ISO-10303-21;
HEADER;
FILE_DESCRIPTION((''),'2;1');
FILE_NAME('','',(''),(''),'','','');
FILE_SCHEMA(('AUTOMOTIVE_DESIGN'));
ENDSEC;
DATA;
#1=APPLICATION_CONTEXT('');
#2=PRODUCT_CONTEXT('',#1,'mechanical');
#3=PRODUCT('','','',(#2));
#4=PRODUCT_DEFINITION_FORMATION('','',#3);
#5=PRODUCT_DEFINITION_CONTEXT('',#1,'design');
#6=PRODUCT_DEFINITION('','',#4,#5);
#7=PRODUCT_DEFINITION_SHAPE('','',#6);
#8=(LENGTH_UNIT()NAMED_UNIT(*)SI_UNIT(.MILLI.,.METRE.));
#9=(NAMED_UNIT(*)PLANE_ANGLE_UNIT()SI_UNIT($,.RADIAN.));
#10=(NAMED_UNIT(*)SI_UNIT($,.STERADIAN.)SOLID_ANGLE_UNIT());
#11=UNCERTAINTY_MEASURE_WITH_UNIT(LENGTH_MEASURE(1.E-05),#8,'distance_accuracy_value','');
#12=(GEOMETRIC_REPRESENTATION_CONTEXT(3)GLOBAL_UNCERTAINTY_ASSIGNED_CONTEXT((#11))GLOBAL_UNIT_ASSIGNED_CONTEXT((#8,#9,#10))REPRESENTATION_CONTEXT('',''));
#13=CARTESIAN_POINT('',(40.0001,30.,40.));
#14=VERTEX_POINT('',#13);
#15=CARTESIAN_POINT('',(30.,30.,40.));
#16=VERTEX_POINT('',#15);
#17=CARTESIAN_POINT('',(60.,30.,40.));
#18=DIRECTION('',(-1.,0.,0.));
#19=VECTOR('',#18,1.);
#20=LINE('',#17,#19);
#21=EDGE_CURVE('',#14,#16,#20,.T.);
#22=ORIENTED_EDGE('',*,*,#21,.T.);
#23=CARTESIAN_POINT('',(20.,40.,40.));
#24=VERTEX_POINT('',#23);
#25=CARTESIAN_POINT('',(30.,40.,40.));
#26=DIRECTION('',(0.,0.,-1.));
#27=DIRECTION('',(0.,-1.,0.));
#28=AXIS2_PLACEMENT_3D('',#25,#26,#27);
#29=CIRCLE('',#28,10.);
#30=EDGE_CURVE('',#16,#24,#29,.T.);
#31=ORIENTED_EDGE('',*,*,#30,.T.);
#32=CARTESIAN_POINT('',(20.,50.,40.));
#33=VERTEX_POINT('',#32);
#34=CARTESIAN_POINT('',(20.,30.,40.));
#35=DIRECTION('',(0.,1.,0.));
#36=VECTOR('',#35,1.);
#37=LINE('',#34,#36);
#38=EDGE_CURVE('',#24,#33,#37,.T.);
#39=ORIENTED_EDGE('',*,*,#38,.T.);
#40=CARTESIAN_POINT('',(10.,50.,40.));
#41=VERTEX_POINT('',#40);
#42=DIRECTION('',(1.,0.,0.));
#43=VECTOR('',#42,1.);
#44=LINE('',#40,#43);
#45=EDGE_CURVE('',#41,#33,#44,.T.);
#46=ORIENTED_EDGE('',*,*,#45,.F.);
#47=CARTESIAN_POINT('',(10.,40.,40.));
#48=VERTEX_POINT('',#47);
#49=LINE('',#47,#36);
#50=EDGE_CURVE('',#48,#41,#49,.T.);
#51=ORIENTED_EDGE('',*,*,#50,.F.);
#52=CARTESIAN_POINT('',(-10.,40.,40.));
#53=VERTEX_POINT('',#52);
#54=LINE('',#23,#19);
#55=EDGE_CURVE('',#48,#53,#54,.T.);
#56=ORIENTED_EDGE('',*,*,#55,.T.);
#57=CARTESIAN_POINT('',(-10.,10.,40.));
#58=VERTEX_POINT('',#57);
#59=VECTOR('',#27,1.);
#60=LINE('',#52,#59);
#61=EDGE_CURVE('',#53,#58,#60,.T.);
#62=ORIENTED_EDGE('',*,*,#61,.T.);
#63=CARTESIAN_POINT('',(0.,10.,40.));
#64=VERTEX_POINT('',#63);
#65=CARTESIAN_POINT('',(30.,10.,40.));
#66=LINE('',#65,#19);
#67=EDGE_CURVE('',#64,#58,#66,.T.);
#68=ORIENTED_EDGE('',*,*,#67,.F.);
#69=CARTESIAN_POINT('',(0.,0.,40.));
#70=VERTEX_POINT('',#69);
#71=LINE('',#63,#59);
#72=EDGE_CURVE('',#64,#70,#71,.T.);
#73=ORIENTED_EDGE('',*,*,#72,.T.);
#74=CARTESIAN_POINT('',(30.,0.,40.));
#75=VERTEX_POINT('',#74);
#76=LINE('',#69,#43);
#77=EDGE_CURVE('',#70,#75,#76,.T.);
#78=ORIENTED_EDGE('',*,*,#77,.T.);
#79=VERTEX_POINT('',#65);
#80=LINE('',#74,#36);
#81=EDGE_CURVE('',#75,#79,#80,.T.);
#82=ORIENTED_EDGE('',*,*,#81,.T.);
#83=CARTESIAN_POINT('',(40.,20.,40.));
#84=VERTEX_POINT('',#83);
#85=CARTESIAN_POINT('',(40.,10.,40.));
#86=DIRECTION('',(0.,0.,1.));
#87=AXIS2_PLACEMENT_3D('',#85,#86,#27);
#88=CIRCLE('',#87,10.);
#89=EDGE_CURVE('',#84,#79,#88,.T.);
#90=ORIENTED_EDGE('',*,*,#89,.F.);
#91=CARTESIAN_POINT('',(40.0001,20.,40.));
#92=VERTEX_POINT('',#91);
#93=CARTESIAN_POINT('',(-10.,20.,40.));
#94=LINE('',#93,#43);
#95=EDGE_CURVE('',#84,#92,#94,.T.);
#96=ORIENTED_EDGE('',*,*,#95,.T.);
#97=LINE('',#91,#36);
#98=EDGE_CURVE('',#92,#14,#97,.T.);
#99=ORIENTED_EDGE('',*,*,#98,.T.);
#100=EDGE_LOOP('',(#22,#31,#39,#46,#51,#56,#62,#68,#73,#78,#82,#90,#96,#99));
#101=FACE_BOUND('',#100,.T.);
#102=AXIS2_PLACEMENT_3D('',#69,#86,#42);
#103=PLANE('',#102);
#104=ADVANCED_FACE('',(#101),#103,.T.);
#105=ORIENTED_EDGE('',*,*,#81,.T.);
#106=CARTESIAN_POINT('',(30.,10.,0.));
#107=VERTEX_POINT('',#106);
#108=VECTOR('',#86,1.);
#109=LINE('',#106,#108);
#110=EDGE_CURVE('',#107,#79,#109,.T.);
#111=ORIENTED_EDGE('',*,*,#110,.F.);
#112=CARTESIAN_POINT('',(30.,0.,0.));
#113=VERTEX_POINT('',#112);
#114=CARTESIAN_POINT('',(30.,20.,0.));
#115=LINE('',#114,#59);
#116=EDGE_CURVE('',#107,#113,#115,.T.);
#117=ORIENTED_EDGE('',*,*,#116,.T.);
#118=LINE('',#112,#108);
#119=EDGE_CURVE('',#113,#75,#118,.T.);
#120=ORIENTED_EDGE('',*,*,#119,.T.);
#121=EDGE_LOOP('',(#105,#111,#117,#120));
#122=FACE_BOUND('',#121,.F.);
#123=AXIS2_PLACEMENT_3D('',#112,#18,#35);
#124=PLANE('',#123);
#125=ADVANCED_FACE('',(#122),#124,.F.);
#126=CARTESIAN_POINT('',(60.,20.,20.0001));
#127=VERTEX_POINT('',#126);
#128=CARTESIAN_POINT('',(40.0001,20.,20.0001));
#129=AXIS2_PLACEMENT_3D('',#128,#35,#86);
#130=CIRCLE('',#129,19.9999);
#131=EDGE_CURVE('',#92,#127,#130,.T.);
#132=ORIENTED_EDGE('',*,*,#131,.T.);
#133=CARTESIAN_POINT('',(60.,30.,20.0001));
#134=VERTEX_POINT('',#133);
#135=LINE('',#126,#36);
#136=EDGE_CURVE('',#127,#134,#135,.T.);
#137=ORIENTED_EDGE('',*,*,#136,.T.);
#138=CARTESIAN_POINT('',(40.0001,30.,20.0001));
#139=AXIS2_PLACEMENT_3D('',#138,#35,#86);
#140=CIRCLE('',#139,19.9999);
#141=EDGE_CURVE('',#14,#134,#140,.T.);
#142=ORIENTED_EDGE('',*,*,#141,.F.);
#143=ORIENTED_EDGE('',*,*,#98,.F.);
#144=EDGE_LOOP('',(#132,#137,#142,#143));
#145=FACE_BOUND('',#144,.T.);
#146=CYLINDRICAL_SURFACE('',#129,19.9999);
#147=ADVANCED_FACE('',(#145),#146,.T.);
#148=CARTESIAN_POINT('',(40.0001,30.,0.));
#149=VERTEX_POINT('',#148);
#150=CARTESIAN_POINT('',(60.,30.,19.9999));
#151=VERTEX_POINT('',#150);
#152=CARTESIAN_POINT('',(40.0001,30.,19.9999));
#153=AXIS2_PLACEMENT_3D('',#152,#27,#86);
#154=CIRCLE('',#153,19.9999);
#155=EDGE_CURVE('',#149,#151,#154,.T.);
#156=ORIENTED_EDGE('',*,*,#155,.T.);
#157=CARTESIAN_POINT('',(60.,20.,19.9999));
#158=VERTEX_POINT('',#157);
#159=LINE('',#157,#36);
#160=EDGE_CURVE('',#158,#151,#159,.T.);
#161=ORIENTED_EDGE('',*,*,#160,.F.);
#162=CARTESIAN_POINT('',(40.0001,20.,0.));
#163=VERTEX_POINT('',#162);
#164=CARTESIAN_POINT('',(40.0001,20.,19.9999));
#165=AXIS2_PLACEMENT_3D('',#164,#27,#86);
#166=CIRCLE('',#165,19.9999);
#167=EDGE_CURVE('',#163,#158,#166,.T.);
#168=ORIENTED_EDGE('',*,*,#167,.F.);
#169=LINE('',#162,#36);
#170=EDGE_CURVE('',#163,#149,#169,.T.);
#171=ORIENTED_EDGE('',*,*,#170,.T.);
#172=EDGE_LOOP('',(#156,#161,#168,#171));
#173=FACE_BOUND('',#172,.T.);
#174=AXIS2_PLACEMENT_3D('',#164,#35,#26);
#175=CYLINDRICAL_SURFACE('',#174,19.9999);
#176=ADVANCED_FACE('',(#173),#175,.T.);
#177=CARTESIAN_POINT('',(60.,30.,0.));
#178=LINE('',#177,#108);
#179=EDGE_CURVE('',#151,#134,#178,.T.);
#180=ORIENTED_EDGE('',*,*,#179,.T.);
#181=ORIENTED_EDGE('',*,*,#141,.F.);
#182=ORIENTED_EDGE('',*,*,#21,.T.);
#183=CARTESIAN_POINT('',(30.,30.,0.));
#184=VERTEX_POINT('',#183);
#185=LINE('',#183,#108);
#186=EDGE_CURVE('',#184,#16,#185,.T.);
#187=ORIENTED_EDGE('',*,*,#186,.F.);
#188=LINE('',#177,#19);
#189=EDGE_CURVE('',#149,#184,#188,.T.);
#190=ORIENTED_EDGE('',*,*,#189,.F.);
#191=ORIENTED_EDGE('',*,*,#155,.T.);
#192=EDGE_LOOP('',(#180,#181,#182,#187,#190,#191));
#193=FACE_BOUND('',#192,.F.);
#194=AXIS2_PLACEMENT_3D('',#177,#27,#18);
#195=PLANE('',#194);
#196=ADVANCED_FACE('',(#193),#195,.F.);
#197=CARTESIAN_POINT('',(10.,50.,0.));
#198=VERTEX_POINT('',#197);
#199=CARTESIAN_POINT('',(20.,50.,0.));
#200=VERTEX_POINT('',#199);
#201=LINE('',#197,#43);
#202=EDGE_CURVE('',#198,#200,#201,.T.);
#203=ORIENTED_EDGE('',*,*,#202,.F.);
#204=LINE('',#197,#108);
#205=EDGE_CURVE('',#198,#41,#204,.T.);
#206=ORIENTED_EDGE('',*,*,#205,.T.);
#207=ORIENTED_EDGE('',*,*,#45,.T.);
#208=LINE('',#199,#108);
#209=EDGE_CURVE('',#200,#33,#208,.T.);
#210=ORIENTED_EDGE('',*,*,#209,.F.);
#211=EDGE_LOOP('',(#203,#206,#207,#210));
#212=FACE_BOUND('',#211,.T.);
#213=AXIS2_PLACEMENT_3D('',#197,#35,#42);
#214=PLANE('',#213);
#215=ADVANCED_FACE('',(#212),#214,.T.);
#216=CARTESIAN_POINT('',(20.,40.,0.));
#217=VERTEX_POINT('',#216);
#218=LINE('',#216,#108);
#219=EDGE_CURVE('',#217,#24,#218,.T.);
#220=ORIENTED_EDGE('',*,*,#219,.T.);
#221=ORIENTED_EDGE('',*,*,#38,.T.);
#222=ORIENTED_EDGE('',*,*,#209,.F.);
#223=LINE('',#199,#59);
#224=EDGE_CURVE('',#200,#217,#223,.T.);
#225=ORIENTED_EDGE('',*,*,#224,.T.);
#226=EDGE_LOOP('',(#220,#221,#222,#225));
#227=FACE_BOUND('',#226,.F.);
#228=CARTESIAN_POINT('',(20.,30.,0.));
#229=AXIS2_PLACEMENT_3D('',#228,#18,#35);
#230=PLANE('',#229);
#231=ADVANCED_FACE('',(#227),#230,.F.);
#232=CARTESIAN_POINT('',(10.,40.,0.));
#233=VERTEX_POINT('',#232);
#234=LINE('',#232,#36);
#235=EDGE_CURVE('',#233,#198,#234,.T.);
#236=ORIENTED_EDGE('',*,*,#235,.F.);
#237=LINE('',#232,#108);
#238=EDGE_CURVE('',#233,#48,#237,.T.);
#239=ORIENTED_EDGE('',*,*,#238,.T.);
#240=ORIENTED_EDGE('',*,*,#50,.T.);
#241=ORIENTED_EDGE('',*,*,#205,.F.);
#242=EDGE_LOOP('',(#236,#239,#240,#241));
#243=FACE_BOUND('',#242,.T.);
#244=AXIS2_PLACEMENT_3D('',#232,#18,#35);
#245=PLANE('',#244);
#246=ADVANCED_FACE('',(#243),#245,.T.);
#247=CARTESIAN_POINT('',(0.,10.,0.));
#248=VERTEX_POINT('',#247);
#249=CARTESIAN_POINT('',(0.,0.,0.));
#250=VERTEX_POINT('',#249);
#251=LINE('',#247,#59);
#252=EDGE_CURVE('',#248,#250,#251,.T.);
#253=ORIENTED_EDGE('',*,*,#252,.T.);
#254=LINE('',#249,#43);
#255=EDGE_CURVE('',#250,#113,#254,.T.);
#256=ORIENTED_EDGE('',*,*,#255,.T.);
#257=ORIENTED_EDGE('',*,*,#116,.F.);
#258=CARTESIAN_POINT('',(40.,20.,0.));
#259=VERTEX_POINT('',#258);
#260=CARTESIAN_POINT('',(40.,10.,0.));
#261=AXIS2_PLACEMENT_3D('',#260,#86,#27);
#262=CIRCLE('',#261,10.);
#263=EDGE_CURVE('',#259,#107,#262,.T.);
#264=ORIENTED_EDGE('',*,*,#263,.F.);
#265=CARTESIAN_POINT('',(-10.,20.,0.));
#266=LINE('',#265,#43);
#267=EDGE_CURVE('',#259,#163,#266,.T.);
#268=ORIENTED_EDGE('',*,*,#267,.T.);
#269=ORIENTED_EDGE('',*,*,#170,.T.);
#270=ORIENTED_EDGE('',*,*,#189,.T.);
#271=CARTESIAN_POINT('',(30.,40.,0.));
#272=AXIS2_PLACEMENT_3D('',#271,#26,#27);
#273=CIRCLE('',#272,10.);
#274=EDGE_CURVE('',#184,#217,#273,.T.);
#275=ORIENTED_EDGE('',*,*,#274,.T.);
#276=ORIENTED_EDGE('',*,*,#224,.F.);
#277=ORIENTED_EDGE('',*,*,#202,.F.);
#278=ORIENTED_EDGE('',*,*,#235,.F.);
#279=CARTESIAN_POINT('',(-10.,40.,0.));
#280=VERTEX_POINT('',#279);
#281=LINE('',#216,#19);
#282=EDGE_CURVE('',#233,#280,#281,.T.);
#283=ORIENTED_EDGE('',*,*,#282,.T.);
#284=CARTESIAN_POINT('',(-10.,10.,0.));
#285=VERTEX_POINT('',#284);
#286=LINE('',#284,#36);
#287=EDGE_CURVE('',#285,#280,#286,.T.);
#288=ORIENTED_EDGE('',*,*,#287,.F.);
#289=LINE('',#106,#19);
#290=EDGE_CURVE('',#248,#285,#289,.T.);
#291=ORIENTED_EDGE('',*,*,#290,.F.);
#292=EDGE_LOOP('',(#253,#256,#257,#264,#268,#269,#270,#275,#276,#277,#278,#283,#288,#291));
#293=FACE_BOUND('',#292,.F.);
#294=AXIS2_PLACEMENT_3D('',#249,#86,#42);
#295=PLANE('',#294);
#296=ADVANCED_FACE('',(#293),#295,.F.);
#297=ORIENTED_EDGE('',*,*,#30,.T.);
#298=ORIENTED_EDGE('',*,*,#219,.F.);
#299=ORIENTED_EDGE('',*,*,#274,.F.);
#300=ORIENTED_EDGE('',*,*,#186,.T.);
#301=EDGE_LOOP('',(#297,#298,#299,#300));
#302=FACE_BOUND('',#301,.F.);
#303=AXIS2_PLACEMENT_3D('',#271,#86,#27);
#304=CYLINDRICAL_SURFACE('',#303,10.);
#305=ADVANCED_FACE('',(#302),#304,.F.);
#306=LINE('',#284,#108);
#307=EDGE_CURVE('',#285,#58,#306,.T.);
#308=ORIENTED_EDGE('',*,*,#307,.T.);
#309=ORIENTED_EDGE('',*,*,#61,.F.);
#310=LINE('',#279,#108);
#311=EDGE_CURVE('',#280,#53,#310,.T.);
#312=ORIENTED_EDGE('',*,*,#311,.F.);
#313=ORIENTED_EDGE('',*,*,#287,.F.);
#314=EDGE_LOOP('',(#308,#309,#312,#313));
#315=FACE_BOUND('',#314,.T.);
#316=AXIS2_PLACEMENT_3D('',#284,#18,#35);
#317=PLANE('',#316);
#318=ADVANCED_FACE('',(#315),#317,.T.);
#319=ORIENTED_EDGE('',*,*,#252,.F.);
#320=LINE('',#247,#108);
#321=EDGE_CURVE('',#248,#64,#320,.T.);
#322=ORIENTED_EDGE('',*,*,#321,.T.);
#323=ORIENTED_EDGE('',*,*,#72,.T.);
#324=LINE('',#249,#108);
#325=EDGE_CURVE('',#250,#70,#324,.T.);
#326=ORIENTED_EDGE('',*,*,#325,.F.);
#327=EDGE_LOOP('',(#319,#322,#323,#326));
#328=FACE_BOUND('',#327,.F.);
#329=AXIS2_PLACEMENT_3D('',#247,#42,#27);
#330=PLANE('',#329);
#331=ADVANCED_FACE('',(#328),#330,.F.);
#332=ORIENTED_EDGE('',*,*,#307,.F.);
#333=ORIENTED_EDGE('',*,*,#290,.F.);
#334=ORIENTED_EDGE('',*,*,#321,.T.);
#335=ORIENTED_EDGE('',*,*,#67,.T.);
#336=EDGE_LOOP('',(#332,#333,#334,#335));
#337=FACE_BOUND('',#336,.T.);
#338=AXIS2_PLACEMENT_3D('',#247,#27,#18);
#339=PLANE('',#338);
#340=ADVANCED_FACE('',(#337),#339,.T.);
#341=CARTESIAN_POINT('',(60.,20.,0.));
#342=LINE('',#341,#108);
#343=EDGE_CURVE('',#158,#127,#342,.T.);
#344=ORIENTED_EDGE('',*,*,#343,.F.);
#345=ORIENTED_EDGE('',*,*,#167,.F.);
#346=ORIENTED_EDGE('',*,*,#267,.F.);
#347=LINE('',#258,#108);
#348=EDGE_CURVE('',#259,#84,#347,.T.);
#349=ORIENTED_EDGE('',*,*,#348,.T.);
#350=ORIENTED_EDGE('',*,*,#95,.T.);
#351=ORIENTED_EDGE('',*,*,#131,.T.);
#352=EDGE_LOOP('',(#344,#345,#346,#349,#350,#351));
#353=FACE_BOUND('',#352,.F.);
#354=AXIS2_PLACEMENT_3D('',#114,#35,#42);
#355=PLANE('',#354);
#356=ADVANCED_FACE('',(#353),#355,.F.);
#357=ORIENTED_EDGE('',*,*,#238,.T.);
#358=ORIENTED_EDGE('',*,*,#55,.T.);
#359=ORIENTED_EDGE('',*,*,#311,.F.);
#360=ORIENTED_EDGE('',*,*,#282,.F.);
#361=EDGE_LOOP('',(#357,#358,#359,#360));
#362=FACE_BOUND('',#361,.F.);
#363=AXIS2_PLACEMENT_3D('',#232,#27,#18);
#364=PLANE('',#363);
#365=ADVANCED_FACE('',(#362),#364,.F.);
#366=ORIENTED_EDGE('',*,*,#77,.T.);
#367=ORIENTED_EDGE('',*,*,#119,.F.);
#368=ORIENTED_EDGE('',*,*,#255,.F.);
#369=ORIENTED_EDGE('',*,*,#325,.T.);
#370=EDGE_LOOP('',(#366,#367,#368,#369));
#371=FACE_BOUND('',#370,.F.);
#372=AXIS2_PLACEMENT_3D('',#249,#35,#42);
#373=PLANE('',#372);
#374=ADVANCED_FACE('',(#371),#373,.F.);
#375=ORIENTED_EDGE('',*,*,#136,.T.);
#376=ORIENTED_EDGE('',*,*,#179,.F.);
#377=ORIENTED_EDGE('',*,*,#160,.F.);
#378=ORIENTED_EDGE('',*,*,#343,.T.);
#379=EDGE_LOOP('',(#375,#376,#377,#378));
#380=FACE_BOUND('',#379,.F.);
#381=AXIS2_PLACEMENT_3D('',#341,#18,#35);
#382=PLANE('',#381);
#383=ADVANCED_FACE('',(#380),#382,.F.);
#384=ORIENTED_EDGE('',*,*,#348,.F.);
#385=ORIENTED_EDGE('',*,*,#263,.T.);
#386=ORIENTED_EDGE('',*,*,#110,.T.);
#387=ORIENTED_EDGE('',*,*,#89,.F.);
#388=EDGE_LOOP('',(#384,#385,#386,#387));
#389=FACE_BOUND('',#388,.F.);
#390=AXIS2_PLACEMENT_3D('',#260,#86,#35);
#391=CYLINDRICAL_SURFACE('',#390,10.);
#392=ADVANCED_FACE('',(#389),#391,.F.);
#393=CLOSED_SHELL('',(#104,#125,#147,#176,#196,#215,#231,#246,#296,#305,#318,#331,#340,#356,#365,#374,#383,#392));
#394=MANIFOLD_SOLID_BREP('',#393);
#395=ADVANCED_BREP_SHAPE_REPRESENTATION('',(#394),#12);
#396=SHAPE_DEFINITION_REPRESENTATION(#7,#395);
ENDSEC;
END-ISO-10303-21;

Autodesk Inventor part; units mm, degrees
ref_plane "YZ Plane" through (0, 0, 0) normal (1, 0, 0) x (0, 1, 0)
ref_plane "XZ Plane" through (0, 0, 0) normal (0, 1, 0) x (-1, 0, 0)
ref_plane "XY Plane" through (0, 0, 0) normal (0, 0, 1) x (1, 0, 0)
sketch "草圖1" plane through (0, 0, 0) normal (0, 0, 1) x (1, 0, 0)
  line L0 (0, 0) -> (30, 0)
  line L1 (30, 0) -> (30, 10)
  line L2 (30, 10) -> (0, 10)
  line L3 (0, 10) -> (0, 0)
  line L4 (30, 10) -> (-10, 10)
  line L5 (-10, 10) -> (-10, 20)
  line L6 (-10, 20) -> (30, 20)
  line L7 (30, 20) -> (30, 10)
  line L8 (-10, 20) -> (60, 20)
  line L9 (60, 20) -> (60, 30)
  line L10 (60, 30) -> (-10, 30)
  line L11 (-10, 30) -> (-10, 20)
  line L12 (-10, 30) -> (20, 30)
  line L13 (20, 30) -> (20, 40)
  line L14 (20, 40) -> (-10, 40)
  line L15 (-10, 40) -> (-10, 30)
  line L16 (20, 40) -> (10, 40)
  line L17 (10, 40) -> (10, 50)
  line L18 (10, 50) -> (20, 50)
  line L19 (20, 50) -> (20, 40)
  dimension "d0" = 10
  dimension "d1" = 10
  dimension "d2" = 10
  dimension "d3" = 10
  dimension "d4" = 10
  dimension "d5" = 30
  dimension "d6" = 10
  dimension "d7" = 70
  dimension "d8" = 30
  dimension "d9" = 10
extrude "擠出1" add sketch "草圖1" along normal blind 40
fillet "圓角1" radius 20 2 edges at (60, 25, 40) (60, 25, 0)
fillet "圓角2" radius 10 2 edges at (20, 30, 20) (30, 20, 20)
properties part number "21"
